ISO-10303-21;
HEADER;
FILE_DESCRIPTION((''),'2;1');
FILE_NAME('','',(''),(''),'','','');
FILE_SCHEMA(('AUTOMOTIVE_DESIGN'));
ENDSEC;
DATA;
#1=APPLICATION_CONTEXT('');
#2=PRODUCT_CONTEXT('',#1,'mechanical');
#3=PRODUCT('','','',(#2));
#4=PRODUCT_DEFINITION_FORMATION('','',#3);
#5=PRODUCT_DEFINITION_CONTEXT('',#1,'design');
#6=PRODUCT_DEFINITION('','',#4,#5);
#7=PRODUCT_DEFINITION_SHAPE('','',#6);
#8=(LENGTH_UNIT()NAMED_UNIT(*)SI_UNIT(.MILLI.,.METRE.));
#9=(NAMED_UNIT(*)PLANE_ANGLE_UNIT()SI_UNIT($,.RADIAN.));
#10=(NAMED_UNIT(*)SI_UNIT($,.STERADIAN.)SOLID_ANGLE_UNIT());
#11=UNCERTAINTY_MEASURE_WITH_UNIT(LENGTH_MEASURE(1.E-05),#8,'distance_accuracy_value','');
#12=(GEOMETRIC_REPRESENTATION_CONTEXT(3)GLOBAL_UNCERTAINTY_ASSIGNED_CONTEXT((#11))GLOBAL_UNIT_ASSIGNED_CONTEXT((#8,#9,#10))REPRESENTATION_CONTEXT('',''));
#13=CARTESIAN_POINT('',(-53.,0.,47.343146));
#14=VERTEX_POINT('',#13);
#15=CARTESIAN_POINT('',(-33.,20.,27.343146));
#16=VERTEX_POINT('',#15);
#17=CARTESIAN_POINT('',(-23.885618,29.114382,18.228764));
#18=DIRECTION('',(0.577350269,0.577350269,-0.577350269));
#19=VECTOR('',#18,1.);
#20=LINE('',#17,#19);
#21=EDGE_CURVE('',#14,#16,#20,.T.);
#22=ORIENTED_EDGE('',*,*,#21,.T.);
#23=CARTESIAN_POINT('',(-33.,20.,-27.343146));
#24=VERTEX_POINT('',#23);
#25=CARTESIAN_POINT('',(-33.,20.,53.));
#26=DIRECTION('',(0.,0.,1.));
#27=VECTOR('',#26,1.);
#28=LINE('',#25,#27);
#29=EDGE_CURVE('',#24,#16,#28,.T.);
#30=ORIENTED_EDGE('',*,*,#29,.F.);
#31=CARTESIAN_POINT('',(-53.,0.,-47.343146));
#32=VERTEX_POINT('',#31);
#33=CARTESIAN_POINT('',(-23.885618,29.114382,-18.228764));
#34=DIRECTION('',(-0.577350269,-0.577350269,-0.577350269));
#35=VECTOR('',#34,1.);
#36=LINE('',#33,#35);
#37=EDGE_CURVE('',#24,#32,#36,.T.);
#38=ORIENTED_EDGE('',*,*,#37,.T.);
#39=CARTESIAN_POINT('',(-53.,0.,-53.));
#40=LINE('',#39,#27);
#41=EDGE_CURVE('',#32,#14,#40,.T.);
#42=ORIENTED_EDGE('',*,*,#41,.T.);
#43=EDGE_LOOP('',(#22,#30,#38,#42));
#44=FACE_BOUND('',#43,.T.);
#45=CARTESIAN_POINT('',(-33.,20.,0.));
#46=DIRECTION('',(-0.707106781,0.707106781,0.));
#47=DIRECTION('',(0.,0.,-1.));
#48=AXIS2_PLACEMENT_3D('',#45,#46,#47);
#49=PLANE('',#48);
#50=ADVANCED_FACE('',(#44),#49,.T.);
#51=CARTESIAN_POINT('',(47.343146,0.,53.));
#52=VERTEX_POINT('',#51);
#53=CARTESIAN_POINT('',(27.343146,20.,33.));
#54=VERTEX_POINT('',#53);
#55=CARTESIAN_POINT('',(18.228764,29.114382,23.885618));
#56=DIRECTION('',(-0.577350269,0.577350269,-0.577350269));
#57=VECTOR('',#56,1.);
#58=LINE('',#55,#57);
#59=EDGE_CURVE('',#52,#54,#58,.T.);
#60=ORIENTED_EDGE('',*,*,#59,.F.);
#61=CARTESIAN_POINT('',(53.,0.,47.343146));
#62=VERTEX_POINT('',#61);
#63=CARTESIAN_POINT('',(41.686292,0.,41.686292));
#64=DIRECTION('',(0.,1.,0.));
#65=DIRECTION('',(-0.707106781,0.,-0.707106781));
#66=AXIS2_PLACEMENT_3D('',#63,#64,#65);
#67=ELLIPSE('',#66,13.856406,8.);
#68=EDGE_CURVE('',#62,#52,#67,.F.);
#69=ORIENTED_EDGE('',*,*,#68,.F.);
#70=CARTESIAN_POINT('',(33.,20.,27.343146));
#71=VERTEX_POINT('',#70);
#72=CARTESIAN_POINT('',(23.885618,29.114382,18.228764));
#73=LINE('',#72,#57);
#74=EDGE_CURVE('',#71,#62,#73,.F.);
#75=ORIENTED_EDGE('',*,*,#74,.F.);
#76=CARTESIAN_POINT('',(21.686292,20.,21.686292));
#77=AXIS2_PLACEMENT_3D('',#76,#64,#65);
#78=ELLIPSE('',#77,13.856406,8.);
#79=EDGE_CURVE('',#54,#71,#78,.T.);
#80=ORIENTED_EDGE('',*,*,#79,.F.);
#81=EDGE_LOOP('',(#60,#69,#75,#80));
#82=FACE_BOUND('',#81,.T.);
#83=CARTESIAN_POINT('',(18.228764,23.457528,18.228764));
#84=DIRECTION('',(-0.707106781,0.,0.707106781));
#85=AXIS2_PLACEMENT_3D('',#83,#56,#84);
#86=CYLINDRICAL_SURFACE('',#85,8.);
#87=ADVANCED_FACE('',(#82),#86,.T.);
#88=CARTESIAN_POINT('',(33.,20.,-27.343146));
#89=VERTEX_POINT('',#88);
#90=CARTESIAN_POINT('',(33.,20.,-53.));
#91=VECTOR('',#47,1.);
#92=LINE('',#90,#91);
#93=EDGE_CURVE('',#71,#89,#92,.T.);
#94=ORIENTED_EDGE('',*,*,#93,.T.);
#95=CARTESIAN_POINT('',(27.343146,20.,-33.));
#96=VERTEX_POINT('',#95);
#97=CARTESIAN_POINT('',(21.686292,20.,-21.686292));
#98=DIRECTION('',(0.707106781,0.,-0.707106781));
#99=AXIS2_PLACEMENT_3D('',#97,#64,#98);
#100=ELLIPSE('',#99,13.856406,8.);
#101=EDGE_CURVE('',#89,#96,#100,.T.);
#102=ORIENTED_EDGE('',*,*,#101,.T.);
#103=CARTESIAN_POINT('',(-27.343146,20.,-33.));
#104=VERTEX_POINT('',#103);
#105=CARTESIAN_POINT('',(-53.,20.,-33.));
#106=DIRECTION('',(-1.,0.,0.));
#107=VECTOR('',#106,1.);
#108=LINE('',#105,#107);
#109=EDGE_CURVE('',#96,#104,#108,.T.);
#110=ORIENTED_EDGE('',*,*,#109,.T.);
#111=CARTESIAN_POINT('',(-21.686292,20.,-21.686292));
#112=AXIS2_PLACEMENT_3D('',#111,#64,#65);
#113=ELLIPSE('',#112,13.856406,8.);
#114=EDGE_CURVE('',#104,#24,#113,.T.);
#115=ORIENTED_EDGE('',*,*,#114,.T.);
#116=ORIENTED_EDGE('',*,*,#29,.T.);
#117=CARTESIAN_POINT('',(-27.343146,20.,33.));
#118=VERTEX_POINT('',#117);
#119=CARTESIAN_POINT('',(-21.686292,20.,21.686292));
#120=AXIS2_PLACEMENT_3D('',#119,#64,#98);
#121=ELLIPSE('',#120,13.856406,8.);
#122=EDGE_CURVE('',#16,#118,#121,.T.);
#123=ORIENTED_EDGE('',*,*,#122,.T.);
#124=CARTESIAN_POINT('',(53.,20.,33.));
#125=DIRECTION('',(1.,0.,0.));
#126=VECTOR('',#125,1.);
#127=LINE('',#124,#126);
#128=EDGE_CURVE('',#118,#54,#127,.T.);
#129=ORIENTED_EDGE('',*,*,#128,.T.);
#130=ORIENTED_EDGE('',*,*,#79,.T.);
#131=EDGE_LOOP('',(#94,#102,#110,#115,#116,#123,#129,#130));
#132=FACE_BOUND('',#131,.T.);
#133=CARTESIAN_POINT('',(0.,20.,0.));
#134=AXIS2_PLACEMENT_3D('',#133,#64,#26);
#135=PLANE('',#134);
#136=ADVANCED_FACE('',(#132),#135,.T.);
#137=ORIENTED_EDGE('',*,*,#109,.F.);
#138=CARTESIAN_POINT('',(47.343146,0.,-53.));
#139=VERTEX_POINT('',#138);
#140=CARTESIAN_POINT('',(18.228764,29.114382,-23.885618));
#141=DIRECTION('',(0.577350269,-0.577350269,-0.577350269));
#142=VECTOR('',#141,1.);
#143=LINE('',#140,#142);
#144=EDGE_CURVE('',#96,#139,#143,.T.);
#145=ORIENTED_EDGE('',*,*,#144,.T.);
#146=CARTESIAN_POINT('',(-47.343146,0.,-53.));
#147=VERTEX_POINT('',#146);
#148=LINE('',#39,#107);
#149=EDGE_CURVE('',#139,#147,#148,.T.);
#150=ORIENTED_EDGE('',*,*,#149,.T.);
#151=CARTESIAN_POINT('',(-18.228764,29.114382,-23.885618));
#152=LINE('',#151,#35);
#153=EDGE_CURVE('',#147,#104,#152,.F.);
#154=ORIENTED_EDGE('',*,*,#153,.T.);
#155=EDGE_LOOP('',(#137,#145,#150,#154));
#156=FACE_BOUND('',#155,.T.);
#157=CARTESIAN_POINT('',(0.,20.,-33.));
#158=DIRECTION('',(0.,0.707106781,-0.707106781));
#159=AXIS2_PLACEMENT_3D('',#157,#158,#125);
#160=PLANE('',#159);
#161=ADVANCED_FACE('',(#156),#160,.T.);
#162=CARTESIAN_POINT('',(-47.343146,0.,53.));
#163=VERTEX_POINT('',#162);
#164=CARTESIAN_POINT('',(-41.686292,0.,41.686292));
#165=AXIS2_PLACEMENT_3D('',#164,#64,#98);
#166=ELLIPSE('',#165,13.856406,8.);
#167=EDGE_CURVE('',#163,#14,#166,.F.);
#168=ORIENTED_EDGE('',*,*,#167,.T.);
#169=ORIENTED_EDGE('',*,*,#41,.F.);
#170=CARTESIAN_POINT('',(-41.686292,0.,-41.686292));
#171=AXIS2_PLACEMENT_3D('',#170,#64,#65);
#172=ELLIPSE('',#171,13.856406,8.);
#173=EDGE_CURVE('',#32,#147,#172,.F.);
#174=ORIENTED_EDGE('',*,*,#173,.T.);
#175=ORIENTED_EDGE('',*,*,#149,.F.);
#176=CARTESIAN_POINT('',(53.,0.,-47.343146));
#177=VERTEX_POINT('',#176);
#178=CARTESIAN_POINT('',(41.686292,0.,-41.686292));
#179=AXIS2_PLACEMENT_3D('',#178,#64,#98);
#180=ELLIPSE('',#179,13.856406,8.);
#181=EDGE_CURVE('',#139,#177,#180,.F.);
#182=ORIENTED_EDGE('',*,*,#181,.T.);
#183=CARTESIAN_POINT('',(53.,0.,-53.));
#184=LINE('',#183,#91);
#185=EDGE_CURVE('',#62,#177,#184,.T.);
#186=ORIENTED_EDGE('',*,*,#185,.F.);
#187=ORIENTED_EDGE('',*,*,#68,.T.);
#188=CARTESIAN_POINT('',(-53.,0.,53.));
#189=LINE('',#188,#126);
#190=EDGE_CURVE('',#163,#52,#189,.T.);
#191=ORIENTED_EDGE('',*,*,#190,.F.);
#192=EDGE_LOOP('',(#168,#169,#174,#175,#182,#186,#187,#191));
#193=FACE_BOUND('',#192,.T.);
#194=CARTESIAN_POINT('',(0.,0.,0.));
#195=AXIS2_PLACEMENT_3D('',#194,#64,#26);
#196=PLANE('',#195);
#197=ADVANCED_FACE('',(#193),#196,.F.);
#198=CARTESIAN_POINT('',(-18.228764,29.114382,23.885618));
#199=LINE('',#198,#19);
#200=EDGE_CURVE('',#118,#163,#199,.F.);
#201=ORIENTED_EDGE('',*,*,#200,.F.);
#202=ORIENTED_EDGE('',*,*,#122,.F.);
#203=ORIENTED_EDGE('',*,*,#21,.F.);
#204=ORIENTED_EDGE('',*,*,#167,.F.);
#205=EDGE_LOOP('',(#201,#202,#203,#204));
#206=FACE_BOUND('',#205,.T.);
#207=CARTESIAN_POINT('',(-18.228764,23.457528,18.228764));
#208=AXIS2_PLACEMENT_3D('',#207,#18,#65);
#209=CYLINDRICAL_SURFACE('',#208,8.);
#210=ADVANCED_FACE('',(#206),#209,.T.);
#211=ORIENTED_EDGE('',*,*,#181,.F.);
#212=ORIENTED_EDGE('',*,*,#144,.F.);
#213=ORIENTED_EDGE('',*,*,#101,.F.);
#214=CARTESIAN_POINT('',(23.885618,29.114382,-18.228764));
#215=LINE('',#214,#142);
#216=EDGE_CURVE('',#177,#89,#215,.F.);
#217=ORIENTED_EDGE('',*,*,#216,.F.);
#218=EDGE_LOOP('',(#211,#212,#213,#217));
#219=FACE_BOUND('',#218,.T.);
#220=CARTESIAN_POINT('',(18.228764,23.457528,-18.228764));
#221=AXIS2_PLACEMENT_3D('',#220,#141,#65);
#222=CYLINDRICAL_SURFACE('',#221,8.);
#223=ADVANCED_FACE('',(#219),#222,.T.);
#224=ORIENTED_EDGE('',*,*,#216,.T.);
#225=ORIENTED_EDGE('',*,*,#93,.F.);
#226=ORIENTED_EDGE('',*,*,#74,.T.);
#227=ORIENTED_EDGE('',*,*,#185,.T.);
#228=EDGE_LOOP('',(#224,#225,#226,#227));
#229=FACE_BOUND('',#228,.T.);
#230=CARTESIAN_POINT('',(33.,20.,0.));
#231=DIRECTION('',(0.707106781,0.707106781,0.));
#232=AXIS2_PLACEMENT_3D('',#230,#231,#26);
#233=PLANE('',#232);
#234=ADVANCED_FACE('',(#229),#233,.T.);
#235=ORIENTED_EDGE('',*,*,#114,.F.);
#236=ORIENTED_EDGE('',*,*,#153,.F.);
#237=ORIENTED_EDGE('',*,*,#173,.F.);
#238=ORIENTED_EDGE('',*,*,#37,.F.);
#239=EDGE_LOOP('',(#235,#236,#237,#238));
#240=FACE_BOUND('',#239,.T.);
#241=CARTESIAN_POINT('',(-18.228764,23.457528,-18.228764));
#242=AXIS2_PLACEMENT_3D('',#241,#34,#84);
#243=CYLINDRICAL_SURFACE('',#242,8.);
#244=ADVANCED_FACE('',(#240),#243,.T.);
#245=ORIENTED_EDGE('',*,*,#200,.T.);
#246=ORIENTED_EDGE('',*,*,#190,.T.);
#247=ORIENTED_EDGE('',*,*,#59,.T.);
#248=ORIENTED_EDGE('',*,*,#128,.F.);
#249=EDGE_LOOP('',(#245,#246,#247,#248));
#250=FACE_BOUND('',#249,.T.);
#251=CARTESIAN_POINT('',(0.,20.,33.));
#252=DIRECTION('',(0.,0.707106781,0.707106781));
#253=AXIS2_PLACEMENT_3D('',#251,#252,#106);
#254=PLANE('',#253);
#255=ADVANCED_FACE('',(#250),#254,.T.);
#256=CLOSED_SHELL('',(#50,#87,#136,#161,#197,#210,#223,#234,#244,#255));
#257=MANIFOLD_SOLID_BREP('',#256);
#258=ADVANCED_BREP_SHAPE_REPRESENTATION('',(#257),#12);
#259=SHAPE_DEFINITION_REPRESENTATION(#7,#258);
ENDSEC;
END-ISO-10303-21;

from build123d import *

# Parameters (mm, degrees)
SKETCH1_W           = 106
SKETCH1_H           = 106
BOSS_EXTRUDE1_DEPTH = 20
CHAMFER3_SIZE       = 20
FILLET1_R           = 8


# Some blends are built 0.0001 mm under size
with BuildPart() as part:
    # Sketch1 → Boss-Extrude1 (new body)
    with BuildSketch(Plane(origin=(0, 0, 0), x_dir=(1, 0, 0), z_dir=(0, 1, 0))):
        Rectangle(SKETCH1_W, SKETCH1_H)
    extrude(amount=BOSS_EXTRUDE1_DEPTH)

    # Chamfer3
    chamfer3_edges = [part.edges().sort_by_distance(p)[0] for p in [
        (-53, 20, 0),
        (0, 20, -53),
        (53, 20, 0),
        (0, 20, 53),
    ]]
    chamfer(chamfer3_edges, length=CHAMFER3_SIZE - 0.0001)  # a hair under: the kernel refuses the full size

    # Fillet1
    # the kernel refuses this fillet: 8 mm, written as the material it takes off along each edge
    with BuildSketch(Plane(origin=(59.666666667, -6.666566667, -59.666666667), x_dir=(-0.8164965809277259, -0.4082482904638644, -0.40824829046386174), z_dir=(-0.5773502691896258, 0.5773502691896258, 0.5773502691896256)), Plane(origin=(59.666666667, -6.666566667, 59.666666667), x_dir=(0.40824829046386324, -0.40824829046386285, -0.8164965809277259), z_dir=(-0.5773502691896257, 0.577350269189626, -0.577350269189626))) as fillet1_piece_1:
        with BuildLine():
            CenterArc((FILLET1_R * 0.57735026919, FILLET1_R), FILLET1_R, 210, 60)
            Line((-FILLET1_R * 0.288675134595, FILLET1_R * 0.5), (0, 0))
            Line((0, 0), (FILLET1_R * 0.57735026919, 0))
        make_face()
    extrude(amount=57.734853714, mode=Mode.SUBTRACT)
    with BuildSketch(Plane(origin=(-59.666666667, -6.666566667, -59.666666667), x_dir=(0.8164965809277261, -0.4082482904638631, -0.4082482904638627), z_dir=(0.5773502691896256, 0.5773502691896257, 0.577350269189626)), Plane(origin=(-59.666666667, -6.666566667, 59.666666667), x_dir=(-0.4082482904638621, -0.40824829046386396, -0.816496580927726), z_dir=(0.5773502691896257, 0.5773502691896258, -0.5773502691896257))) as fillet1_piece_2:
        with BuildLine():
            CenterArc((FILLET1_R * 0.57735026919, -FILLET1_R), FILLET1_R, 90, 60)
            Line((-FILLET1_R * 0.288675134595, -FILLET1_R * 0.5), (0, 0))
            Line((0, 0), (FILLET1_R * 0.57735026919, 0))
        make_face()
    extrude(amount=57.734853714, mode=Mode.SUBTRACT)


solid = part.part
